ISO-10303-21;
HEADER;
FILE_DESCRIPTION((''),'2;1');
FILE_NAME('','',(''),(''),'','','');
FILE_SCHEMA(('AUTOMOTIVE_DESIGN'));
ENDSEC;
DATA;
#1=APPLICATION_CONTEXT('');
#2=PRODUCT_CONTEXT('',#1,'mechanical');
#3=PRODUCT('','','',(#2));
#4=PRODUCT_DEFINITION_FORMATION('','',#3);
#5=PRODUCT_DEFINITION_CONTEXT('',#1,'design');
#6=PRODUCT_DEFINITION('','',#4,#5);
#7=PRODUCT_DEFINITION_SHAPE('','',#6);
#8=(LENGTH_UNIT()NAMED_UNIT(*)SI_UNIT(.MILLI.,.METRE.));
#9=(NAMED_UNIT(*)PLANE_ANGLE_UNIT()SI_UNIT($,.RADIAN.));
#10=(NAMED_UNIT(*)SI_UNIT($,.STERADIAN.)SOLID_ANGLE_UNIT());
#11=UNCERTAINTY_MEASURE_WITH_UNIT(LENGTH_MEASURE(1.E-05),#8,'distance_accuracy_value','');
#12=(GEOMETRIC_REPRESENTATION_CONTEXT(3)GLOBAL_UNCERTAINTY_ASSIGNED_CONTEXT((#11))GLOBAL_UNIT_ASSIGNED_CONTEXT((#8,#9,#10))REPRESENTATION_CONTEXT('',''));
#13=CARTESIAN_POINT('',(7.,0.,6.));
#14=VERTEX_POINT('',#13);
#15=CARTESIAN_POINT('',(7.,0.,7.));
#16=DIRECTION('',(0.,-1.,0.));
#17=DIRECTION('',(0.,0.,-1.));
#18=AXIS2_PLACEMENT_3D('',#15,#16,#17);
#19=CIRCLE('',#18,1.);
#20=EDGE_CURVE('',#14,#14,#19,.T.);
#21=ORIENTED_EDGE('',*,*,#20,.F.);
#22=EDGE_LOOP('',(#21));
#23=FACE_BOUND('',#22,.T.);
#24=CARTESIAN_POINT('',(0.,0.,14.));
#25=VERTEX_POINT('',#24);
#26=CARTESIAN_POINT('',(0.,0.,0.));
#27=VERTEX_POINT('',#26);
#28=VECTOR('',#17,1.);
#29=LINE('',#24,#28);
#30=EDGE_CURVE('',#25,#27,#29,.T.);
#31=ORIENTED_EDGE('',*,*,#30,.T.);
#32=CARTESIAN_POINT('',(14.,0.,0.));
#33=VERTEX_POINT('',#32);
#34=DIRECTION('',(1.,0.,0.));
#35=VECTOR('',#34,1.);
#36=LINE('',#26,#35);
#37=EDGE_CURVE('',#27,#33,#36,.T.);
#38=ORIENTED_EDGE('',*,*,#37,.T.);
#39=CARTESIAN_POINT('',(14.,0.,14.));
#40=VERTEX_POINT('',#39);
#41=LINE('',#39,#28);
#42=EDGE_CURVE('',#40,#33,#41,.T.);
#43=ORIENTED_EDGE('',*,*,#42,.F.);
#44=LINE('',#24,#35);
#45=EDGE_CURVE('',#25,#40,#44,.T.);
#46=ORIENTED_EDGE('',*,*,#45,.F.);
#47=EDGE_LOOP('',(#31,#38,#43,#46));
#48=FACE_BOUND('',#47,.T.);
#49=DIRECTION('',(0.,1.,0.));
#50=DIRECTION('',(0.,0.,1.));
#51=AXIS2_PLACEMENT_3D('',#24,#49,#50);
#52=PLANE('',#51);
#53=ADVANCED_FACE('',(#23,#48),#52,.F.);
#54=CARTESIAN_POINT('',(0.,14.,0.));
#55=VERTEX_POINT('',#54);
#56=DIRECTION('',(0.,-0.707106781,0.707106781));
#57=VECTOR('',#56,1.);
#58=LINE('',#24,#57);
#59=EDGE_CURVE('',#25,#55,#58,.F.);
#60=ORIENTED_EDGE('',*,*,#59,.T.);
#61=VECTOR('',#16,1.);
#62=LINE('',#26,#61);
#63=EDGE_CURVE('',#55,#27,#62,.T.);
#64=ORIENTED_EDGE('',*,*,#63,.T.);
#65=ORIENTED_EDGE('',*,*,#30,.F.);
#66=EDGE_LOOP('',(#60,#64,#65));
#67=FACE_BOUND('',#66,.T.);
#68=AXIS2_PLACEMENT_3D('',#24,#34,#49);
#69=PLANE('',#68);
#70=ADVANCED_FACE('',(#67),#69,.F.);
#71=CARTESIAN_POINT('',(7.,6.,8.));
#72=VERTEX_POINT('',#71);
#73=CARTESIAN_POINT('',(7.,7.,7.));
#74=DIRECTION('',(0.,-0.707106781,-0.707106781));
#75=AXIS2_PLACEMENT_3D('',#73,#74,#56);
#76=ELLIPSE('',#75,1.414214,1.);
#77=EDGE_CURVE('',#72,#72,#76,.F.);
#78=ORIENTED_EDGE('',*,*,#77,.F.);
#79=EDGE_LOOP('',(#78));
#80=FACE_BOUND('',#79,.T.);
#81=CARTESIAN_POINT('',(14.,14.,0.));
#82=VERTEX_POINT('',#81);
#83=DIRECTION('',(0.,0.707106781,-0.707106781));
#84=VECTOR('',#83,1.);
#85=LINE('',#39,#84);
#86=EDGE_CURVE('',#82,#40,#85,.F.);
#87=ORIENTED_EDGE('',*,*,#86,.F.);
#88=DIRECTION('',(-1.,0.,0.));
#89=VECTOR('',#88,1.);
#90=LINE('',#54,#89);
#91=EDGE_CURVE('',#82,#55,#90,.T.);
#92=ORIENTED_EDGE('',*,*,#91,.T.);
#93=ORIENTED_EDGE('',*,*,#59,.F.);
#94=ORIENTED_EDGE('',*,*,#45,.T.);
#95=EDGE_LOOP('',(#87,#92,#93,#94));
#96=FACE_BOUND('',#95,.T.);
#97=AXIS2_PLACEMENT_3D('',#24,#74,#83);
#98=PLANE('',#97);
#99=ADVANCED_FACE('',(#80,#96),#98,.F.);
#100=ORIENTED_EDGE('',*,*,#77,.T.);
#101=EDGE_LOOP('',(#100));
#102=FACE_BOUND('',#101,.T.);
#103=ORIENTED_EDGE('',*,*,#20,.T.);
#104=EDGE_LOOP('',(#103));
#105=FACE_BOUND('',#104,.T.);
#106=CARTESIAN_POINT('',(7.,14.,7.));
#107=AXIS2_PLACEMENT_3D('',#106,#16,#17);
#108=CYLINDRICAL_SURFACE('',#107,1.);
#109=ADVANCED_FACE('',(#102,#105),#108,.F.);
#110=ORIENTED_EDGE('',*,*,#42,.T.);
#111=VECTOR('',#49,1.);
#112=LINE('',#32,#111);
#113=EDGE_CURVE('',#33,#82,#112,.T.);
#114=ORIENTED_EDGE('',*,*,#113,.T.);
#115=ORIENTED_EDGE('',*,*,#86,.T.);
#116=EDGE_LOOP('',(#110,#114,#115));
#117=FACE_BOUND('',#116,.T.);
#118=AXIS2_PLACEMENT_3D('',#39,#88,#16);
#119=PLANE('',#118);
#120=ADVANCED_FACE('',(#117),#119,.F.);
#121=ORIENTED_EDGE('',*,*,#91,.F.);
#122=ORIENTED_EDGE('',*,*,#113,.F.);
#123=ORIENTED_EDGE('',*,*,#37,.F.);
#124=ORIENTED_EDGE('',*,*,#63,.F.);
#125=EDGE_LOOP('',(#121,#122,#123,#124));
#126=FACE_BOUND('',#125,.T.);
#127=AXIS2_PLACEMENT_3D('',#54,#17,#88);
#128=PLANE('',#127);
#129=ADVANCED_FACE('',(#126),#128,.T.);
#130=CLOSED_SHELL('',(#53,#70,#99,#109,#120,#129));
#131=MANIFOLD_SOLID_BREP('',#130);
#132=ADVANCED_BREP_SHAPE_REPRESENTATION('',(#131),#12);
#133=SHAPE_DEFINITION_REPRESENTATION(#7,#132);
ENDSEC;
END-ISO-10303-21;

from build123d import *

# Parameters (mm, degrees)
ESQUISSE1_W             = 14
ESQUISSE1_H             = 14
EXTRUSION1_DEPTH        = 14
CHANFREIN1_SIZE         = 14
ESQUISSE2_R             = 1
ENL_V_MAT_EXTRU_1_DEPTH = 25.248711306


with BuildPart() as part:
    # Esquisse1 → Extrusion1 (new body)
    with BuildSketch(Plane.XY):
        with Locations((7, 7)):
            Rectangle(ESQUISSE1_W, ESQUISSE1_H)
    extrude(amount=EXTRUSION1_DEPTH)

    # Chanfrein1
    chanfrein1_edges = [part.edges().sort_by_distance(p)[0] for p in [
        (7, 14, 14),
    ]]
    chamfer(chanfrein1_edges, length=CHANFREIN1_SIZE - 0.0001)  # a hair under: the kernel refuses the full size

    # Esquisse2 → Enlèv. mat.-Extru.1 (cut, through all)
    with BuildSketch(Plane.XZ):
        with Locations(Location((7, 7, 0), (0, 0, 270))):
            Circle(ESQUISSE2_R)
    extrude(amount=-ENL_V_MAT_EXTRU_1_DEPTH, mode=Mode.SUBTRACT)


solid = part.part
